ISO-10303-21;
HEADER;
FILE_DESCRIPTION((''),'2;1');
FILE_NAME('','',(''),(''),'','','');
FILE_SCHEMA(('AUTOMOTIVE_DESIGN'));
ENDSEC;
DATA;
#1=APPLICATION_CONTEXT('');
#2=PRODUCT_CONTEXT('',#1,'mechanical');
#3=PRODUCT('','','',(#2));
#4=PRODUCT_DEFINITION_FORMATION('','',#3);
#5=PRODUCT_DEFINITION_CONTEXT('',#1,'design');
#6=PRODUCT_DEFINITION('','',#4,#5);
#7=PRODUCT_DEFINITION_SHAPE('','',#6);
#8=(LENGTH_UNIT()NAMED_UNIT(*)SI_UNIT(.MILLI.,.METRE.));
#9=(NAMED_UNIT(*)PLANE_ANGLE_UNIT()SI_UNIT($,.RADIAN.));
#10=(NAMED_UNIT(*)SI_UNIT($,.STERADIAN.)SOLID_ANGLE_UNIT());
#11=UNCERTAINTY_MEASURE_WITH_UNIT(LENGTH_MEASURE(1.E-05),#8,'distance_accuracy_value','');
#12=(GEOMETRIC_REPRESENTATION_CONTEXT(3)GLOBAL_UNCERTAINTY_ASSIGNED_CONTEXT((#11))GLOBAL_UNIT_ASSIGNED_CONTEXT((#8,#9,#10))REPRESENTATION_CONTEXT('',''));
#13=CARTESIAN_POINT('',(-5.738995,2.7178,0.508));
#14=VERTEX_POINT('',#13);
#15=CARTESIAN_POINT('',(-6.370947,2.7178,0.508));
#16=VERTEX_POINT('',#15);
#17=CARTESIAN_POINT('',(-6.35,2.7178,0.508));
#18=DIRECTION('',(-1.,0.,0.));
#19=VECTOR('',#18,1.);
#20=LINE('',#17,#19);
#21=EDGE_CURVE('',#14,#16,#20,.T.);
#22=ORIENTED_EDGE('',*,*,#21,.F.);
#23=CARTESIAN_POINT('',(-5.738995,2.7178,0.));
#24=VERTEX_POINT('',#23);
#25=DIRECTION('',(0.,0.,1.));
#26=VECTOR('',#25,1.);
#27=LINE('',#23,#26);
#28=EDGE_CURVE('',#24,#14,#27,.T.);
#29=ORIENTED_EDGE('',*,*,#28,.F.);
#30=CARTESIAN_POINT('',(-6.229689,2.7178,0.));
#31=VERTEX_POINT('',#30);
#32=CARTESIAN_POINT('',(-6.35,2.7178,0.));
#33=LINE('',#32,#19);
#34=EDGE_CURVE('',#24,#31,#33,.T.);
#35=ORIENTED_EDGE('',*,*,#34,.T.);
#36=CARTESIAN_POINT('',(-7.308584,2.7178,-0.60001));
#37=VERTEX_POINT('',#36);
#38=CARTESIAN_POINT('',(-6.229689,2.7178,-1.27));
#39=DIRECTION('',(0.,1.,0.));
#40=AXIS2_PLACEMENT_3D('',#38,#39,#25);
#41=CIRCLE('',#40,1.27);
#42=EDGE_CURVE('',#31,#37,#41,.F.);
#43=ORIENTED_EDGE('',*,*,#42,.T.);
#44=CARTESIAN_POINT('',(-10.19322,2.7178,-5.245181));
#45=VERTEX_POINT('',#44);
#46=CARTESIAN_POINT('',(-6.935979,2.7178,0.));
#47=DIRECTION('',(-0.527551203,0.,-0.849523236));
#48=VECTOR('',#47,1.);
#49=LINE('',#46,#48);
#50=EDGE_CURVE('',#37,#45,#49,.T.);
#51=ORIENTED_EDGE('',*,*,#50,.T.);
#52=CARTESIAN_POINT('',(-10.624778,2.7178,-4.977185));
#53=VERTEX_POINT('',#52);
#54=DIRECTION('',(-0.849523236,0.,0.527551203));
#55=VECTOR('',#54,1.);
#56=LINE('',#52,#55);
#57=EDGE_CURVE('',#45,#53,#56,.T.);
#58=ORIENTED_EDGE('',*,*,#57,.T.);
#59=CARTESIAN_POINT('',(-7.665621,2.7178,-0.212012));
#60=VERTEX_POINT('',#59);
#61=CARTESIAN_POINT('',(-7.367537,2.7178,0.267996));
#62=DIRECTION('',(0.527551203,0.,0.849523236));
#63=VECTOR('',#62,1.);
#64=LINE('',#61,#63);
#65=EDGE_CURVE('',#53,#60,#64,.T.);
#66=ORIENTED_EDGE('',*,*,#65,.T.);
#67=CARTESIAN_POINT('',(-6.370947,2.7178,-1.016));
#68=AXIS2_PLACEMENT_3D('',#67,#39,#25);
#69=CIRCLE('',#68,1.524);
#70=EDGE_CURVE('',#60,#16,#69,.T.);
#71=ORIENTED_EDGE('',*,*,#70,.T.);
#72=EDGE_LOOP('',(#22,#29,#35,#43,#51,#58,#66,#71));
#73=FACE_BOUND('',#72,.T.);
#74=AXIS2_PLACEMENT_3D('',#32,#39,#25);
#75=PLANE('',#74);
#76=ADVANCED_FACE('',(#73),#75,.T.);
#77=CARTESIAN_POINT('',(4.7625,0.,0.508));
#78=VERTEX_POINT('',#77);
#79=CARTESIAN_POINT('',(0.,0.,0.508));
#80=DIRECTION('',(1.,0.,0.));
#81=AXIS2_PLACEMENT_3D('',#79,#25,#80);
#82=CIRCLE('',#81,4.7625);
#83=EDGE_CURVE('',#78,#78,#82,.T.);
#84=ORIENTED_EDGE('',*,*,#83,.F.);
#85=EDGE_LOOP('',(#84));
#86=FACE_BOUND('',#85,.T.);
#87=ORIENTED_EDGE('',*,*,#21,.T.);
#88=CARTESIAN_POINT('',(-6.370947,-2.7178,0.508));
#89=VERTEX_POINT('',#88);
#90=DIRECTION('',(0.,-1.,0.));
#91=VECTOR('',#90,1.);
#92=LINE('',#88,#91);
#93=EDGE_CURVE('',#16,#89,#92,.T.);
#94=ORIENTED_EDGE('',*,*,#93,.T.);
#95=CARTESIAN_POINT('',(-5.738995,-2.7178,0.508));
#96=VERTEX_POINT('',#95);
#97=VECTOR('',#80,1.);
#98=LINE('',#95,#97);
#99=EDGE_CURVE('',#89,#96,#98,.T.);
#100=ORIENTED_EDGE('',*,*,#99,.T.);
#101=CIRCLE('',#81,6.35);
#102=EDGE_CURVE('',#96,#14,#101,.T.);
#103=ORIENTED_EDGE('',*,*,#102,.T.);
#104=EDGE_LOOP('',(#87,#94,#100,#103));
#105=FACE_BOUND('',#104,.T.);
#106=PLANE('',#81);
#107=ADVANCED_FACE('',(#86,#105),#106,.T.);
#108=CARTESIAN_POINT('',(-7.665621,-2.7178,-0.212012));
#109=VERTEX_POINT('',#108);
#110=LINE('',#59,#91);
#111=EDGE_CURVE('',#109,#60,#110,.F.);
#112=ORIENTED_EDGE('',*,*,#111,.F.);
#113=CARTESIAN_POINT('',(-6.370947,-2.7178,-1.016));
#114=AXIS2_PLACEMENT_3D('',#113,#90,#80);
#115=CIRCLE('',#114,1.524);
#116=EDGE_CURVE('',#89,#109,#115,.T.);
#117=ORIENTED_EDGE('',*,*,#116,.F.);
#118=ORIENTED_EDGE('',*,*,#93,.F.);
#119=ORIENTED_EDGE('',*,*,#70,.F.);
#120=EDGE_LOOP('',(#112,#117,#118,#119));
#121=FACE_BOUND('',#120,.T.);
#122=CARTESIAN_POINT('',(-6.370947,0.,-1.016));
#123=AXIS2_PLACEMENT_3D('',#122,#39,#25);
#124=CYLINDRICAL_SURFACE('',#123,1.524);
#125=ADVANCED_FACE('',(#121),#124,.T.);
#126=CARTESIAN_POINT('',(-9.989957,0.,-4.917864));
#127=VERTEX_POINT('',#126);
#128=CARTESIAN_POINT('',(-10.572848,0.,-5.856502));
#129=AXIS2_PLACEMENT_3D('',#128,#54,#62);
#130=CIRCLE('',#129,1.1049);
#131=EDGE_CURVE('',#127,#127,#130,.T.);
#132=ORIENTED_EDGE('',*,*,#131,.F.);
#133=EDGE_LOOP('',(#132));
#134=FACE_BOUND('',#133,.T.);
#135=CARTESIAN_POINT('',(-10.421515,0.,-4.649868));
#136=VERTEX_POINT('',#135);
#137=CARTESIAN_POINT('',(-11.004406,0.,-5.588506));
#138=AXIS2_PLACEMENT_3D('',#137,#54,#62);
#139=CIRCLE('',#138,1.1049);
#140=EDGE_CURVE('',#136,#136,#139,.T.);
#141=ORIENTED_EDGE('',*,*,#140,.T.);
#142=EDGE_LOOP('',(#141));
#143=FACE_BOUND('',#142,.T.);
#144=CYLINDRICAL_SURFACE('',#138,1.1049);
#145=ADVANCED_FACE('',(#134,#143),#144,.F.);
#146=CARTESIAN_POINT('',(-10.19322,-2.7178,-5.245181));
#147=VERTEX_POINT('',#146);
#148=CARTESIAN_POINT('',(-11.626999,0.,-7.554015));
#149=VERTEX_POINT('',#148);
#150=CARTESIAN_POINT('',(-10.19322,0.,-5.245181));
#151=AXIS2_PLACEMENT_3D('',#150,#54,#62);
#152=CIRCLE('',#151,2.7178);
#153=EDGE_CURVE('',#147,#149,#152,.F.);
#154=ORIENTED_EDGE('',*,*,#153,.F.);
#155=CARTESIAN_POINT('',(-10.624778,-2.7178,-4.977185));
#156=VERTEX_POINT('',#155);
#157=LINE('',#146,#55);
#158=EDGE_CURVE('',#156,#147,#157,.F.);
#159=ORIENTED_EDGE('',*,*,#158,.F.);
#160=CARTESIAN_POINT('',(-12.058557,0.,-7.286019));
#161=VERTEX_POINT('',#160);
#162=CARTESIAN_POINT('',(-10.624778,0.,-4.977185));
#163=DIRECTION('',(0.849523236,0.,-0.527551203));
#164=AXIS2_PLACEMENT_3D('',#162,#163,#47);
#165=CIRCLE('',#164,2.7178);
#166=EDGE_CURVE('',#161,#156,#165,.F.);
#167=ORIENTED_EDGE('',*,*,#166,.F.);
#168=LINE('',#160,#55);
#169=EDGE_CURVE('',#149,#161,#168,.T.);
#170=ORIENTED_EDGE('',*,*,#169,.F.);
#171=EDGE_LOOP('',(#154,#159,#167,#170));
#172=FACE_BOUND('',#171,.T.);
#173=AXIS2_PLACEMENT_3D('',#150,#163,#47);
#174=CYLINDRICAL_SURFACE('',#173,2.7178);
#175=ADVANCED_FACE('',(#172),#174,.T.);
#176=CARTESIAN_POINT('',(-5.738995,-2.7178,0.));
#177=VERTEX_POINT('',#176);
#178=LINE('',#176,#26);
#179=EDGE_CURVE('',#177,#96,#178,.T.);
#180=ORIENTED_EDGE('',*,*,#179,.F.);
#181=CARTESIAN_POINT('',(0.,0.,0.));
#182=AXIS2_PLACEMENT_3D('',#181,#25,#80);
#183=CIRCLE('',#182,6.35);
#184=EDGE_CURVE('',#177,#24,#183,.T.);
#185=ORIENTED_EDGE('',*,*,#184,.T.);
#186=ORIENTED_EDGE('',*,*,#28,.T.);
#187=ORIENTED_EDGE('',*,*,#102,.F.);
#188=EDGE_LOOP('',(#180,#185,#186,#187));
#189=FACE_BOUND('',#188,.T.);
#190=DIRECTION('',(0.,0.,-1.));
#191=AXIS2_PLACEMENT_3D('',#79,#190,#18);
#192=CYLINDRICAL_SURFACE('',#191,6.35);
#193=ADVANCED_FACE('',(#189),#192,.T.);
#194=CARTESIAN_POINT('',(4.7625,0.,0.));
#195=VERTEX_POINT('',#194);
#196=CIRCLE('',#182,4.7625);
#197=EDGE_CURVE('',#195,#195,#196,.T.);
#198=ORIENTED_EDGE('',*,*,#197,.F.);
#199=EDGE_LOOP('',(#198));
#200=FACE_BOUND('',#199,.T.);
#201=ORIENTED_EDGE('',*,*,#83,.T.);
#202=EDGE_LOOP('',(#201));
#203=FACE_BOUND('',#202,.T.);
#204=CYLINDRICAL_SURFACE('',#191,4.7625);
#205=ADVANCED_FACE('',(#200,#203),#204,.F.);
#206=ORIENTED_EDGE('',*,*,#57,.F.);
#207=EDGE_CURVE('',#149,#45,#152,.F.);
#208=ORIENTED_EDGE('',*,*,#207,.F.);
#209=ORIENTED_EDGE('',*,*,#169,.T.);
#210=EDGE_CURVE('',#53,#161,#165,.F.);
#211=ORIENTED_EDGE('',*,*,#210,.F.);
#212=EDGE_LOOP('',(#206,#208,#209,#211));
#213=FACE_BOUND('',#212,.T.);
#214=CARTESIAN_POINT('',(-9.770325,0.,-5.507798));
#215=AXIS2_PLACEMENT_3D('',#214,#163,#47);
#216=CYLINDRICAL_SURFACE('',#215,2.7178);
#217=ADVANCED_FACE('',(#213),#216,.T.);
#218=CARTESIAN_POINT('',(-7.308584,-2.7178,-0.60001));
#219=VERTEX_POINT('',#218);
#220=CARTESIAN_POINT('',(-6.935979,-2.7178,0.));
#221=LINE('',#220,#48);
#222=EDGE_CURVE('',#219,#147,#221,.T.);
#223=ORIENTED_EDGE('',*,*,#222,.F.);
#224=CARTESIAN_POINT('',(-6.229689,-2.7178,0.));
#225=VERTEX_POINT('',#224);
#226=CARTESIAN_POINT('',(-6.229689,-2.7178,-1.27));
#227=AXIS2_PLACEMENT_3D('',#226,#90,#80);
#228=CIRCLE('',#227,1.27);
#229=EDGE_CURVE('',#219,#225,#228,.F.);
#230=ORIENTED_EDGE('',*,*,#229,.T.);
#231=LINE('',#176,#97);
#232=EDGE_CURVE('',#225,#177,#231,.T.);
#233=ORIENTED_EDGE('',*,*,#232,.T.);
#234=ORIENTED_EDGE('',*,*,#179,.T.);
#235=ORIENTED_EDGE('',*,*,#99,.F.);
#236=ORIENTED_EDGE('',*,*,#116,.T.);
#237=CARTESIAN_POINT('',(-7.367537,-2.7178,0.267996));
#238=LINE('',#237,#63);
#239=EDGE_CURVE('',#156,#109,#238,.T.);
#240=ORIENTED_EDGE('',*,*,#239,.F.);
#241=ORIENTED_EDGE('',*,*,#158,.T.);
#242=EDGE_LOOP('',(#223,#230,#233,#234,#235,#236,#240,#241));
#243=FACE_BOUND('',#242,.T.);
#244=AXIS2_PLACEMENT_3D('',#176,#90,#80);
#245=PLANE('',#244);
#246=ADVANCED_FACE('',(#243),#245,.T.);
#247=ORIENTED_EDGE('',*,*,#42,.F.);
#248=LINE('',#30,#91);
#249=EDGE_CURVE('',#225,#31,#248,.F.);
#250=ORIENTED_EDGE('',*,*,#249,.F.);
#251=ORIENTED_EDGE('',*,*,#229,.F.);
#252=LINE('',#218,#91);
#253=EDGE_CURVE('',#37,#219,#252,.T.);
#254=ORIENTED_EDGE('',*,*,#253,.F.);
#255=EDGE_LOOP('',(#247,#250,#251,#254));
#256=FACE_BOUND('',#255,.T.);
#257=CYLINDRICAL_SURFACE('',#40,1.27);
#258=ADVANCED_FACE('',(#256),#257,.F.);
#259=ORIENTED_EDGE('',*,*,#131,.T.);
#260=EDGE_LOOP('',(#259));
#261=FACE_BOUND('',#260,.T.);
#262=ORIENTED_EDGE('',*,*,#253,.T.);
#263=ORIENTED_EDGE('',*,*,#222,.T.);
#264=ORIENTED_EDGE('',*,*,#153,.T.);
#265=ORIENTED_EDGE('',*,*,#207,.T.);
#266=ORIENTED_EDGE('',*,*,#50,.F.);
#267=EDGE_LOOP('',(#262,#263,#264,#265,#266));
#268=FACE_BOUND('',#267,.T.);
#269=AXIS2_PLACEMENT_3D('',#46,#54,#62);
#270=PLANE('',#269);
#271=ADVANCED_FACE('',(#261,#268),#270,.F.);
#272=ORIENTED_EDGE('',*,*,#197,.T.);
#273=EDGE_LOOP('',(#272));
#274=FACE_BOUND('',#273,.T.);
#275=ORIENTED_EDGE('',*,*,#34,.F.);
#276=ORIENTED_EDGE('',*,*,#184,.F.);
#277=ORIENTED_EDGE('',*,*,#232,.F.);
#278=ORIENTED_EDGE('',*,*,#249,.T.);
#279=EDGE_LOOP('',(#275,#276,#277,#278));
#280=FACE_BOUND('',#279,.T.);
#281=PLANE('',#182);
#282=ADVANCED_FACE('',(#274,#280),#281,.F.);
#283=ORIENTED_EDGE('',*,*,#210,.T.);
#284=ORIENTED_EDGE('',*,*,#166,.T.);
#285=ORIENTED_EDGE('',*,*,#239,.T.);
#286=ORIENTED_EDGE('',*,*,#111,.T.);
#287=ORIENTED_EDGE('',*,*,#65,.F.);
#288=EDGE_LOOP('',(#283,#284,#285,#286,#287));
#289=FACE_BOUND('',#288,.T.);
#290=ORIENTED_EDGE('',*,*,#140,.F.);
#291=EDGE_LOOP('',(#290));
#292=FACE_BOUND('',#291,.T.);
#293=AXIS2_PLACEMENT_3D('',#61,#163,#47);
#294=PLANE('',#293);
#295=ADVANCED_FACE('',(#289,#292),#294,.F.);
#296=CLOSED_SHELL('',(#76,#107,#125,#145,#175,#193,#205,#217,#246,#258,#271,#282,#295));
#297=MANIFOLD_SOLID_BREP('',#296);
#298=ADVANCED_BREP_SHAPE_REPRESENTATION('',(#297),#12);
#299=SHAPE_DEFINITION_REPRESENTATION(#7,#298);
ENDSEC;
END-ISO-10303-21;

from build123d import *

# Parameters (mm, degrees)
SKETCH1_R                           = 6.35
SKETCH1_R_2                         = 4.7625
EXTRUDE1_DEPTH                      = 0.508
EXTRUDE2_DEPTH                      = 2.7178
EXTRUDE2_DEPTH_BACK                 = 2.7178
SKETCH3_W                           = 0.611005039
SKETCH3_H                           = 5.4356
EXTRUDE3_DEPTH                      = 0.508
FILLET1_R                           = 1.27
FILLET2_R                           = 1.524
FILLET3_R                           = 2.7178
F_1_32_0_03125_DIAMETER_HOLE1_D     = 2.2098
F_1_32_0_03125_DIAMETER_HOLE1_DEPTH = 6.35


with BuildPart() as part:
    # Sketch1 → Extrude1 (new body)
    with BuildSketch(Plane.XY):
        Circle(SKETCH1_R)
        Circle(SKETCH1_R_2, mode=Mode.SUBTRACT)
    extrude(amount=EXTRUDE1_DEPTH)



with BuildPart() as body_2:
    # Sketch2 → Extrude2 (new, two sides: drawn at the far end of the back side and taken through both)
    with BuildSketch(Plane(origin=(0, 0, 0), x_dir=(1, 0, 0), z_dir=(0, 1, 0)).offset(-EXTRUDE2_DEPTH_BACK)):
        Polygon((-6.35, -0.508), (-6.35, 0), (-6.935979418, 0), (-11.626998738, 7.554015397), (-12.058556542, 7.286019385), (-7.367537222, -0.267996011), (-7.218495515, -0.508), (-6.935979418, -0.508), align=None)
    extrude(amount=EXTRUDE2_DEPTH + EXTRUDE2_DEPTH_BACK)


with BuildPart() as part_1:
    add(part.part)

    add(body_2.part)  # Extrude3 merges body 2
    # Sketch3 → Extrude3 (add)
    with BuildSketch(Plane.XY.offset(0.508)):
        with Locations((-6.044497481, 0)):
            Rectangle(SKETCH3_W, SKETCH3_H)
    extrude(amount=-EXTRUDE3_DEPTH)

    # Fillet1
    fillet1_edges = [part_1.edges().sort_by_distance(p)[0] for p in [
        (-6.935979418, 0, 0),
    ]]
    fillet(fillet1_edges, radius=FILLET1_R)

    # Fillet2
    fillet2_edges = [part_1.edges().sort_by_distance(p)[0] for p in [
        (-7.218495515, 0, 0.508),
    ]]
    fillet(fillet2_edges, radius=FILLET2_R)

    # Fillet3
    fillet3_edges = [part_1.edges().sort_by_distance(p)[0] for p in [
        (-11.84277764, 2.7178, -7.420017391),
        (-11.84277764, -2.7178, -7.420017391),
    ]]
    fillet(fillet3_edges, radius=FILLET3_R - 0.0001)  # a hair under: the kernel refuses the full size

    # 1/32 (0.03125) Diameter Hole1
    with Locations(Plane(origin=(-11.00440601, 0, -5.588505732), x_dir=(-0.527551203197, 0, -0.849523235707), z_dir=(-0.849523235707, 0, 0.527551203197))):
        with Locations((0, 0)):
            Hole(F_1_32_0_03125_DIAMETER_HOLE1_D / 2, depth=F_1_32_0_03125_DIAMETER_HOLE1_DEPTH)


solid = part_1.part
